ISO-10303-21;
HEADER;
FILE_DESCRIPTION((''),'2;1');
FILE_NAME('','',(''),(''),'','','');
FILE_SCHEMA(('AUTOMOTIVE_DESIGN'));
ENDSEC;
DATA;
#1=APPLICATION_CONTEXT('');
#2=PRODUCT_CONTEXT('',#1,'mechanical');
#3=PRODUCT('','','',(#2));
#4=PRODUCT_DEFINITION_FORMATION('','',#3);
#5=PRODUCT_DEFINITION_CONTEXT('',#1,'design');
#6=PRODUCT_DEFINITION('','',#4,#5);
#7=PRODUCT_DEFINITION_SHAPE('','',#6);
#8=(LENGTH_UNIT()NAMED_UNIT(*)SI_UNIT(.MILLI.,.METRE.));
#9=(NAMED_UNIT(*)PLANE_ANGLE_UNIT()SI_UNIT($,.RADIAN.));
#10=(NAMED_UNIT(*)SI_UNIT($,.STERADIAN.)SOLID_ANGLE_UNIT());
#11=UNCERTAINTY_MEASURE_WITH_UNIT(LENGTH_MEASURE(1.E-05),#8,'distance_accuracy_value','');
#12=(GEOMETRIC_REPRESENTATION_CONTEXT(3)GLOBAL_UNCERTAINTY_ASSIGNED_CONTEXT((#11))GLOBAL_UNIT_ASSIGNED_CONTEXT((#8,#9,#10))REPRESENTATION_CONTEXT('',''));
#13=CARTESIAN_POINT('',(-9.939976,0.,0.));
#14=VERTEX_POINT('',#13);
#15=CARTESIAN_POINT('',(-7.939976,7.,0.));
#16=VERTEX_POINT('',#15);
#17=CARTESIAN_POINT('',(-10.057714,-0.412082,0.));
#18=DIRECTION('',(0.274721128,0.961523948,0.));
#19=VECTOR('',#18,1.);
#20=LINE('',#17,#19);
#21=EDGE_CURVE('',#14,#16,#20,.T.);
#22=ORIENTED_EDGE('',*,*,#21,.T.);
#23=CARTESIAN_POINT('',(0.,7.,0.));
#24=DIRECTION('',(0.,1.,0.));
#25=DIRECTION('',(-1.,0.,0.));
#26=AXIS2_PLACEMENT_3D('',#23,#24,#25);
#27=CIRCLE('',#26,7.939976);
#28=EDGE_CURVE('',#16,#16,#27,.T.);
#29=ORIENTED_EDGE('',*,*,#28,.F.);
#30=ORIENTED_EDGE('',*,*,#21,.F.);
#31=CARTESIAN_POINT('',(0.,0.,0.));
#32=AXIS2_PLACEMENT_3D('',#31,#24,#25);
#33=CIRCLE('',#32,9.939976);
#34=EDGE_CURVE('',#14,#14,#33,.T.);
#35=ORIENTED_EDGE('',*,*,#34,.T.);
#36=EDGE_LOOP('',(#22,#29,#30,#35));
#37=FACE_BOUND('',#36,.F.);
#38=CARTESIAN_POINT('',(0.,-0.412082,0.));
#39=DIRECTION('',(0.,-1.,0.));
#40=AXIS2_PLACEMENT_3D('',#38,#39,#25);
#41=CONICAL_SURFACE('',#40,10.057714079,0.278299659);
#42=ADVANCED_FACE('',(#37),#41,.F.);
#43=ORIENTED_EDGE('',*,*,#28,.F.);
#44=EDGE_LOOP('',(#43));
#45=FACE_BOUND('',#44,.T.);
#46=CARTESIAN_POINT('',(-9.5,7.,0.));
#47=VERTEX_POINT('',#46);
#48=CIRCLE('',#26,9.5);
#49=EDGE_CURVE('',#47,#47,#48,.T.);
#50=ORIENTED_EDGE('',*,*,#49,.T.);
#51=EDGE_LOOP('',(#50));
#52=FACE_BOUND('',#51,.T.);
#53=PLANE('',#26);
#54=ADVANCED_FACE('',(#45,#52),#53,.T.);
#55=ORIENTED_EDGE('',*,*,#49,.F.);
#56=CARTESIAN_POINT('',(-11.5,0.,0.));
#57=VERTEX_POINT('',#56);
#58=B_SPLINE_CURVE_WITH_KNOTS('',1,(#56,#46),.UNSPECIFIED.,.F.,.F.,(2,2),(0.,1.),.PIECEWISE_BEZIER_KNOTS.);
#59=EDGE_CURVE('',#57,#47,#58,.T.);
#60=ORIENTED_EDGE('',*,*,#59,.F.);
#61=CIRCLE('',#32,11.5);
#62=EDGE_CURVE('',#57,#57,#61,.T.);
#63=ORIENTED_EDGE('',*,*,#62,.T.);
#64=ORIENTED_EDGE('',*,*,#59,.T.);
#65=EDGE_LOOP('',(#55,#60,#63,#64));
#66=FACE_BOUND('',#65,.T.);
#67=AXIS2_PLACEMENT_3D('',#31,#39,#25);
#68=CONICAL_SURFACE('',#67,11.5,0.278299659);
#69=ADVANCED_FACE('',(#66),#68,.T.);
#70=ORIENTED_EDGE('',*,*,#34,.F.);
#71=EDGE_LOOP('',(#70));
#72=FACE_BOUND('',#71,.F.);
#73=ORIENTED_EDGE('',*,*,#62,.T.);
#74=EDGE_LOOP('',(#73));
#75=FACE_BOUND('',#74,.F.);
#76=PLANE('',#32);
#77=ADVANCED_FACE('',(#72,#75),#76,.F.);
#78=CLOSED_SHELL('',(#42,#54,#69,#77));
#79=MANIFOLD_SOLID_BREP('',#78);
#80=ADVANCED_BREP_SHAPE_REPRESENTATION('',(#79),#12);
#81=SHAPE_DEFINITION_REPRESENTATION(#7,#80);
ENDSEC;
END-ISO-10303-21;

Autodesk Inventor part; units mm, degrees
ref_plane "YZ Plane" through (0, 0, 0) normal (1, 0, 0) x (0, 1, 0)
ref_plane "XY Plane" through (0, 0, 0) normal (0, 0, 1) x (1, 0, 0)
sketch "Szkic6" plane through (0, 0, 0) normal (0, 1, 0) x (-1, 0, 0)
  circle A0 centre (0, 0) radius 11.5
  dimension "d33" = 23
ref_plane "Płaszczyzna konstrukcyjna1" through (0, 7, 0) normal (0, 1, 0) x (-1, 0, 0)
sketch "Szkic7" plane through (0, 7, 0) normal (0, 1, 0) x (-1, 0, 0)
  circle A0 centre (0, 0) radius 9.5
  dimension "d35" = 19
loft "Wyciągnięcie złożone1" add profiles "Szkic6", "Szkic7"
shell "Skorupa1" thickness 1.5 removed faces 2 at (0.3595, 7, 2.9609) at (-0.1507, 0, 2.542)
equation "\"d33\" = OD1"
equation "\"d35\" = OD2"
equation "\"d52\" = THK"
equation "\"SzerokośćGięciaPodcięcia\" = Grubość"
equation "\"RozmiarPodcięciaNarożnika\" = 4 * Grubość"
equation "\"PromieńPrzejścia\" = PromieńGięcia"
equation "\"Rozmiar_promienia_Jacobiego\" = PromieńGięcia"
equation "\"Wielk_odstępu\" = Grubość"
equation "\"d2\" = PromieńGięcia"
equation "\"d23\" = PromieńGięcia"
equation "\"OD1\" = 23"
equation "\"OD2\" = 19"
equation "\"L\" = 7"
equation "\"THK\" = 1.5"
equation "\"d34\" = L"
equation "\"Grubość\" = 1.5"
equation "\"PromieńGięcia\" = 3"
properties part number "Redukcja symetryczna Ø23x19x1,5 L=7" material "304"
